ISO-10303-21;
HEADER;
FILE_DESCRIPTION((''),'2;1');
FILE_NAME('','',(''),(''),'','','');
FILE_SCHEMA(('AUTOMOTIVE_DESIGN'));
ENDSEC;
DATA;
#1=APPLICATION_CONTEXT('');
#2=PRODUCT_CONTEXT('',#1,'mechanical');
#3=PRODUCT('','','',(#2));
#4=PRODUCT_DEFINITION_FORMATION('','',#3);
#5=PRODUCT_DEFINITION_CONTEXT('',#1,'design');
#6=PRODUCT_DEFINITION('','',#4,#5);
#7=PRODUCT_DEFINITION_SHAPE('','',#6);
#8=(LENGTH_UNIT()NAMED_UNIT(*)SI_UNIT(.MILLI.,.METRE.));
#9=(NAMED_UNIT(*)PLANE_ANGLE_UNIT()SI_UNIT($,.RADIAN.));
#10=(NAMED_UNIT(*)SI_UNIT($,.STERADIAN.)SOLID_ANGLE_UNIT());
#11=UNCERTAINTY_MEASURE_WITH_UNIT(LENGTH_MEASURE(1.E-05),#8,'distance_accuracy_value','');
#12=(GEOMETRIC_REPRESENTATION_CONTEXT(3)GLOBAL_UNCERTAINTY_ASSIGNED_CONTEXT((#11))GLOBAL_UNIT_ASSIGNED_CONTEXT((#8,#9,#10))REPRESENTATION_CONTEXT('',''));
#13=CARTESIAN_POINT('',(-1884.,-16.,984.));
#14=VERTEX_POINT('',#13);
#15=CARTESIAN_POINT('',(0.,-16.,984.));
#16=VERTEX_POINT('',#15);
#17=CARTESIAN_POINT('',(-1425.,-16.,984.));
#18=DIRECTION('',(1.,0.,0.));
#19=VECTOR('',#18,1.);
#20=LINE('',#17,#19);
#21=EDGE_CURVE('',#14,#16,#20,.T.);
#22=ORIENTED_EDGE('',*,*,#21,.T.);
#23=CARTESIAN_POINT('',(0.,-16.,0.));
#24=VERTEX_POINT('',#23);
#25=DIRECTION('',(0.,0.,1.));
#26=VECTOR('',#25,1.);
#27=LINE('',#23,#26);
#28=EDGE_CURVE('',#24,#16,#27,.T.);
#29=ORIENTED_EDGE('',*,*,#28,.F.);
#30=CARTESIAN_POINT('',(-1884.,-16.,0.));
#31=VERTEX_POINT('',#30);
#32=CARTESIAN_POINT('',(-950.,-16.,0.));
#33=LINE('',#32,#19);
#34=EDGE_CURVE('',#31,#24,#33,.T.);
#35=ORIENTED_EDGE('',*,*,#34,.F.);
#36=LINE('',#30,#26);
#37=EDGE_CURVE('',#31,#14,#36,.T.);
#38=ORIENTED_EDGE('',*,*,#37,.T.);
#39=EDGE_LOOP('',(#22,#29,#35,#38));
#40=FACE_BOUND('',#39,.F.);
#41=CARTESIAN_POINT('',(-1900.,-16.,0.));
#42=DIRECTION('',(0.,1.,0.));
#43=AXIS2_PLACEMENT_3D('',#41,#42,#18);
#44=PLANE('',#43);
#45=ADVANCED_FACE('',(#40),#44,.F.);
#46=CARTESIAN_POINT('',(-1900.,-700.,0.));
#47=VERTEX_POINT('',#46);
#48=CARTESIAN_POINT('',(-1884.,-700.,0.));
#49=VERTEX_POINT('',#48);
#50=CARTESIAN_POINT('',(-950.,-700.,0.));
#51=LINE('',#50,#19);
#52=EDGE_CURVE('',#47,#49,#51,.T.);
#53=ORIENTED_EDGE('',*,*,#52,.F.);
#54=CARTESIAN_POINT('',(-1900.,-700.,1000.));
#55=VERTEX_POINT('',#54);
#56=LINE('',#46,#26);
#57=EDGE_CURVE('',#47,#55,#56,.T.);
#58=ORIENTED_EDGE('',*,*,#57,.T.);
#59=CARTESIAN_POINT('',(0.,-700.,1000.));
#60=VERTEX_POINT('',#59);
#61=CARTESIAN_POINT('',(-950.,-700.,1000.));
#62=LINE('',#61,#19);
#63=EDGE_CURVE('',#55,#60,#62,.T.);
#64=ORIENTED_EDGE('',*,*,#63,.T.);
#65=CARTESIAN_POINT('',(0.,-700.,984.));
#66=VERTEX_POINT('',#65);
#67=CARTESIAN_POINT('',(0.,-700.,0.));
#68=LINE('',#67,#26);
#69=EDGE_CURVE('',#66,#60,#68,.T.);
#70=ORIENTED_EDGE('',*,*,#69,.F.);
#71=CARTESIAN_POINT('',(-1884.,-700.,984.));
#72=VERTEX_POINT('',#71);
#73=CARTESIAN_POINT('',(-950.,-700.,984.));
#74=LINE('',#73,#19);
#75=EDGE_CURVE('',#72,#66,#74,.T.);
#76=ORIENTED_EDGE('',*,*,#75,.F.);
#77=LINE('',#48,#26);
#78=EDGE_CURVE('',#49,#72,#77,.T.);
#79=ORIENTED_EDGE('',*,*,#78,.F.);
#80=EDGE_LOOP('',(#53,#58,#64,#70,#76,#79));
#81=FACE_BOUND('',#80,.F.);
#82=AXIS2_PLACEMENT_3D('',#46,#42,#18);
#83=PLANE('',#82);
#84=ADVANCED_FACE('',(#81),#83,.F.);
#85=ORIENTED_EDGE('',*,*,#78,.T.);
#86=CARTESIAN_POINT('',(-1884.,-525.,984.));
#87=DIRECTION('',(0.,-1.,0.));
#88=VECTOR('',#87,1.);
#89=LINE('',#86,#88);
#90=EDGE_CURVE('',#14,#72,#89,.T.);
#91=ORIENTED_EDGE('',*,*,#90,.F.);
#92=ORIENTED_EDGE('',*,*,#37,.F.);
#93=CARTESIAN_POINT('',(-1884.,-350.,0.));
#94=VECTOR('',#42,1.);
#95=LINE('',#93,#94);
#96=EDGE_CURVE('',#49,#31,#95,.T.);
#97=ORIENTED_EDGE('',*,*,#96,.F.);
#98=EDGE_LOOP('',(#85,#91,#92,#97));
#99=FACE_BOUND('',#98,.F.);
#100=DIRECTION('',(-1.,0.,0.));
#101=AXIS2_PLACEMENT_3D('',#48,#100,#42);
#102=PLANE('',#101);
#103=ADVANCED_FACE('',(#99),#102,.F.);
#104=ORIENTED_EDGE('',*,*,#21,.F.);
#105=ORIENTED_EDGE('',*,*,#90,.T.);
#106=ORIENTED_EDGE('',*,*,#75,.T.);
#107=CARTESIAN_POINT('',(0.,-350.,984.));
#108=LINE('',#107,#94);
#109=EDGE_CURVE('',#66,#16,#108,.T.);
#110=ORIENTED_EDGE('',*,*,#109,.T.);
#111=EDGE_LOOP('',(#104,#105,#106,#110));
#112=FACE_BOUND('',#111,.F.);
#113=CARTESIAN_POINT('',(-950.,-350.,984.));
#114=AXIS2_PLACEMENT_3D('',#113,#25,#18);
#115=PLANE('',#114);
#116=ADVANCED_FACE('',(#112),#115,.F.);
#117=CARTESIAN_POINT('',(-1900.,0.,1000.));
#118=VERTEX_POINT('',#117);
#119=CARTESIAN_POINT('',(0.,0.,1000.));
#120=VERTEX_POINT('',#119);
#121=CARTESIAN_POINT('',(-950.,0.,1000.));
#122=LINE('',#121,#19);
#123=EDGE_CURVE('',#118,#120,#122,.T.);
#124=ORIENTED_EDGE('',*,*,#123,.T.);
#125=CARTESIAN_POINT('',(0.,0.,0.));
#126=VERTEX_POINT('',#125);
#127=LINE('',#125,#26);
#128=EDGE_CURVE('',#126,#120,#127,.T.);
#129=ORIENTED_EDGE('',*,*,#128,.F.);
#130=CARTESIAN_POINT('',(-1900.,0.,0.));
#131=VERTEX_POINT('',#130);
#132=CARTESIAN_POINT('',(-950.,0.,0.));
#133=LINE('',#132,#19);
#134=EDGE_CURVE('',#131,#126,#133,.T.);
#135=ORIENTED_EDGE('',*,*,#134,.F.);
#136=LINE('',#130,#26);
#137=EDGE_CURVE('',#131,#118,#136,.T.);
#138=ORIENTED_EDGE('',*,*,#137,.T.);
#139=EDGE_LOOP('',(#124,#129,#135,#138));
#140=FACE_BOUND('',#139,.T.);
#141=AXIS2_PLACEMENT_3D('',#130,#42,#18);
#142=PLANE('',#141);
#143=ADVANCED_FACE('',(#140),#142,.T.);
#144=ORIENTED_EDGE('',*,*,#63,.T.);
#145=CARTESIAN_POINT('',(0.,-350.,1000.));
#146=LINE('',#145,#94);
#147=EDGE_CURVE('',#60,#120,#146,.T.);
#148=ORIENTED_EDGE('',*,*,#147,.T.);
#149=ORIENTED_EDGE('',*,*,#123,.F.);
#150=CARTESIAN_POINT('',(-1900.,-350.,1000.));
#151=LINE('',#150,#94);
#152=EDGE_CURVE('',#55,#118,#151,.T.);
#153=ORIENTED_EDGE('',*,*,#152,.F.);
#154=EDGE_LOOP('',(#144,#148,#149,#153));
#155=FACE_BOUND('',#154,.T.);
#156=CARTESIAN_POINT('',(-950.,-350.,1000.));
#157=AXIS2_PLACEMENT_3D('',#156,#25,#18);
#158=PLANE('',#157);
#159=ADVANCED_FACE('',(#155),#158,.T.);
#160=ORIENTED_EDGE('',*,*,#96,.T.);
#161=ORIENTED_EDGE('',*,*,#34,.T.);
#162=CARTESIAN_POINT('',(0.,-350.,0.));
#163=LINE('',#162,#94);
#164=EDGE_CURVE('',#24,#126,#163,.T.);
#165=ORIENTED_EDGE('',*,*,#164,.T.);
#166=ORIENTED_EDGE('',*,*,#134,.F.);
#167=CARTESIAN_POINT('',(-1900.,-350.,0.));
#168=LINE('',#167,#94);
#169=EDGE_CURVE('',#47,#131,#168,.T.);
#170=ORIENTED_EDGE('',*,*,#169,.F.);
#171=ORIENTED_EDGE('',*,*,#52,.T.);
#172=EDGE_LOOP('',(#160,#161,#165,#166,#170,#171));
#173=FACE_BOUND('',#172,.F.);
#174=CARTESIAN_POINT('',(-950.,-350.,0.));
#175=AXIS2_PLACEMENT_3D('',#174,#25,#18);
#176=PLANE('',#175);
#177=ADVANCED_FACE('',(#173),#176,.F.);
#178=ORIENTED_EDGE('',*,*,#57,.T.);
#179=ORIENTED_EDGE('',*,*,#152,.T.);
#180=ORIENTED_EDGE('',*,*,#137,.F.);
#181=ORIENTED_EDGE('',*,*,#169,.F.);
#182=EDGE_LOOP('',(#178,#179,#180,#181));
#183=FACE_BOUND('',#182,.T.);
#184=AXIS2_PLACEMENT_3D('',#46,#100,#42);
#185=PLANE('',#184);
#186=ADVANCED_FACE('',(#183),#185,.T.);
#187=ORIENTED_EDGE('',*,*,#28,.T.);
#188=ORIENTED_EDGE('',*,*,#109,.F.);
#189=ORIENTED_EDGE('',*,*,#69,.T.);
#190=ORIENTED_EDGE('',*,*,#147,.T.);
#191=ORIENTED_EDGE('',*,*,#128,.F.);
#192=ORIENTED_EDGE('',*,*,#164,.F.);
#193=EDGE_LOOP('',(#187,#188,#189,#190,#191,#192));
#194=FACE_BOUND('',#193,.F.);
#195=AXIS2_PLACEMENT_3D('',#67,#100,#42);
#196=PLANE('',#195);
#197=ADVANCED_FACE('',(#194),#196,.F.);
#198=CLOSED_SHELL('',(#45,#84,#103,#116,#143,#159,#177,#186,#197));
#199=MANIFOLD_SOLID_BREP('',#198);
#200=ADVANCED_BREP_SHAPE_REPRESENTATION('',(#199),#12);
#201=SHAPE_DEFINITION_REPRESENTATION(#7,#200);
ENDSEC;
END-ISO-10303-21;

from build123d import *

# Parameters (mm, degrees)
F0_W     = 1900
F0_H     = 700
F1_DEPTH = 1000
F2_T     = -16


# Not quite as in the source:
# - a feature names something its author has since deleted; it is built from what else it names


with BuildPart() as f1:
    # F0 (on Top) → F1 (new body)
    with BuildSketch(Plane.XY):
        with Locations((-950, -350)):
            Rectangle(F0_W, F0_H)
    extrude(amount=F1_DEPTH)

    # F2
    f2_openings = [f1.faces().sort_by_distance(p)[0] for p in [
        (-950, -350, 0),
        (-950, -700, 500),
        (0, -350, 500),
    ]]
    offset(amount=F2_T, openings=f2_openings)


solid = f1.part
